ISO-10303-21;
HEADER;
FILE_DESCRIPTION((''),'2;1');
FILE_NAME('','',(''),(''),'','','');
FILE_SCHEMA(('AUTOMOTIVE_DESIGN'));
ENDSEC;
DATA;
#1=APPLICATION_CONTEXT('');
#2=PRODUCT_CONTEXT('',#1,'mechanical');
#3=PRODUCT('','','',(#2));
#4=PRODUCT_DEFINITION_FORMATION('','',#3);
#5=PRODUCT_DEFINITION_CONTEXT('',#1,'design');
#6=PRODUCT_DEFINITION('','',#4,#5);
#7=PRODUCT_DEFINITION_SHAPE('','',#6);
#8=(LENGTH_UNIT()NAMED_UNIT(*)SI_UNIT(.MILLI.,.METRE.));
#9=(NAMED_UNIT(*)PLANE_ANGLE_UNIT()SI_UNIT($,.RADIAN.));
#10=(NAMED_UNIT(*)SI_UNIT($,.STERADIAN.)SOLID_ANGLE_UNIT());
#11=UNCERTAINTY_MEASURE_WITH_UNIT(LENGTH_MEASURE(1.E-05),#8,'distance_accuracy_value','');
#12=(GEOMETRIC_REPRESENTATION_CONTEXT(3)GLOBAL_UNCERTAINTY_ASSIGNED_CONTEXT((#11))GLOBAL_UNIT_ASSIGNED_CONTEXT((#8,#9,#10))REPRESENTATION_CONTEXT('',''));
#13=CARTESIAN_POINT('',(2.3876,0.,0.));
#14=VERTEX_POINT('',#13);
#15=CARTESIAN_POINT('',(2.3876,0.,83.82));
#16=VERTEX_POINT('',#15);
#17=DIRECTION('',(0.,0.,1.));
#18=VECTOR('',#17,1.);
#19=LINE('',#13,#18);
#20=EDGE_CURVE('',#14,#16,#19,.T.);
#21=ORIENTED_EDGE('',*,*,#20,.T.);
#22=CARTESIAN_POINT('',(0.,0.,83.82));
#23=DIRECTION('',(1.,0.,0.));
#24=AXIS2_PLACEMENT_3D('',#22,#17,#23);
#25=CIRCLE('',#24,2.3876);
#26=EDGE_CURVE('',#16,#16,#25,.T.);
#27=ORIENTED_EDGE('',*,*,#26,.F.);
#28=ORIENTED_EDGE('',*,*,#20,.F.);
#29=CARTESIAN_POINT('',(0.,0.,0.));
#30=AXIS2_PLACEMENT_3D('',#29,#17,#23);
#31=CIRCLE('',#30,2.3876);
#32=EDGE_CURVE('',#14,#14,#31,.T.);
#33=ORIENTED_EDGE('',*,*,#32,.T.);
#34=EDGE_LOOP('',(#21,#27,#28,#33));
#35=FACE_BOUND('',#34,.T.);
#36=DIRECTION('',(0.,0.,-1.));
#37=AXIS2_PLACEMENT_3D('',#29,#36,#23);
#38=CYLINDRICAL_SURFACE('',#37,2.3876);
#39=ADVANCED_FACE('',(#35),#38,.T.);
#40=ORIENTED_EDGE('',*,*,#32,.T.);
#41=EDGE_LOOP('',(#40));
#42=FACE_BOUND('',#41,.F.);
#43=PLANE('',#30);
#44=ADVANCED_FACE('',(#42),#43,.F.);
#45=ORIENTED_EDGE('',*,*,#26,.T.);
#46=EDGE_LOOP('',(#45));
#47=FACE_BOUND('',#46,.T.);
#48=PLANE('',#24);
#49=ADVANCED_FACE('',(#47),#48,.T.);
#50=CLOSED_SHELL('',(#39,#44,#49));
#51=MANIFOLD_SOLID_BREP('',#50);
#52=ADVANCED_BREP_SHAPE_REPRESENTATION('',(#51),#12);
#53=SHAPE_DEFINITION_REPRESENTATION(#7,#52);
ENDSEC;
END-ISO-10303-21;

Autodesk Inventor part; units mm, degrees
ref_plane "YZ Plane" through (0, 0, 0) normal (1, 0, 0) x (0, 1, 0)
ref_plane "XZ Plane" through (0, 0, 0) normal (0, 1, 0) x (-1, 0, 0)
ref_plane "XY Plane" through (0, 0, 0) normal (0, 0, 1) x (1, 0, 0)
sketch "Sketch1" plane through (0, 0, 0) normal (0, 0, 1) x (1, 0, 0)
  circle A0 centre (0, 0) radius 2.3876
  dimension "d0" = 4.7752
extrude "Extrusion1" add sketch "Sketch1" along normal blind 83.82
properties part number "6InchAx"
